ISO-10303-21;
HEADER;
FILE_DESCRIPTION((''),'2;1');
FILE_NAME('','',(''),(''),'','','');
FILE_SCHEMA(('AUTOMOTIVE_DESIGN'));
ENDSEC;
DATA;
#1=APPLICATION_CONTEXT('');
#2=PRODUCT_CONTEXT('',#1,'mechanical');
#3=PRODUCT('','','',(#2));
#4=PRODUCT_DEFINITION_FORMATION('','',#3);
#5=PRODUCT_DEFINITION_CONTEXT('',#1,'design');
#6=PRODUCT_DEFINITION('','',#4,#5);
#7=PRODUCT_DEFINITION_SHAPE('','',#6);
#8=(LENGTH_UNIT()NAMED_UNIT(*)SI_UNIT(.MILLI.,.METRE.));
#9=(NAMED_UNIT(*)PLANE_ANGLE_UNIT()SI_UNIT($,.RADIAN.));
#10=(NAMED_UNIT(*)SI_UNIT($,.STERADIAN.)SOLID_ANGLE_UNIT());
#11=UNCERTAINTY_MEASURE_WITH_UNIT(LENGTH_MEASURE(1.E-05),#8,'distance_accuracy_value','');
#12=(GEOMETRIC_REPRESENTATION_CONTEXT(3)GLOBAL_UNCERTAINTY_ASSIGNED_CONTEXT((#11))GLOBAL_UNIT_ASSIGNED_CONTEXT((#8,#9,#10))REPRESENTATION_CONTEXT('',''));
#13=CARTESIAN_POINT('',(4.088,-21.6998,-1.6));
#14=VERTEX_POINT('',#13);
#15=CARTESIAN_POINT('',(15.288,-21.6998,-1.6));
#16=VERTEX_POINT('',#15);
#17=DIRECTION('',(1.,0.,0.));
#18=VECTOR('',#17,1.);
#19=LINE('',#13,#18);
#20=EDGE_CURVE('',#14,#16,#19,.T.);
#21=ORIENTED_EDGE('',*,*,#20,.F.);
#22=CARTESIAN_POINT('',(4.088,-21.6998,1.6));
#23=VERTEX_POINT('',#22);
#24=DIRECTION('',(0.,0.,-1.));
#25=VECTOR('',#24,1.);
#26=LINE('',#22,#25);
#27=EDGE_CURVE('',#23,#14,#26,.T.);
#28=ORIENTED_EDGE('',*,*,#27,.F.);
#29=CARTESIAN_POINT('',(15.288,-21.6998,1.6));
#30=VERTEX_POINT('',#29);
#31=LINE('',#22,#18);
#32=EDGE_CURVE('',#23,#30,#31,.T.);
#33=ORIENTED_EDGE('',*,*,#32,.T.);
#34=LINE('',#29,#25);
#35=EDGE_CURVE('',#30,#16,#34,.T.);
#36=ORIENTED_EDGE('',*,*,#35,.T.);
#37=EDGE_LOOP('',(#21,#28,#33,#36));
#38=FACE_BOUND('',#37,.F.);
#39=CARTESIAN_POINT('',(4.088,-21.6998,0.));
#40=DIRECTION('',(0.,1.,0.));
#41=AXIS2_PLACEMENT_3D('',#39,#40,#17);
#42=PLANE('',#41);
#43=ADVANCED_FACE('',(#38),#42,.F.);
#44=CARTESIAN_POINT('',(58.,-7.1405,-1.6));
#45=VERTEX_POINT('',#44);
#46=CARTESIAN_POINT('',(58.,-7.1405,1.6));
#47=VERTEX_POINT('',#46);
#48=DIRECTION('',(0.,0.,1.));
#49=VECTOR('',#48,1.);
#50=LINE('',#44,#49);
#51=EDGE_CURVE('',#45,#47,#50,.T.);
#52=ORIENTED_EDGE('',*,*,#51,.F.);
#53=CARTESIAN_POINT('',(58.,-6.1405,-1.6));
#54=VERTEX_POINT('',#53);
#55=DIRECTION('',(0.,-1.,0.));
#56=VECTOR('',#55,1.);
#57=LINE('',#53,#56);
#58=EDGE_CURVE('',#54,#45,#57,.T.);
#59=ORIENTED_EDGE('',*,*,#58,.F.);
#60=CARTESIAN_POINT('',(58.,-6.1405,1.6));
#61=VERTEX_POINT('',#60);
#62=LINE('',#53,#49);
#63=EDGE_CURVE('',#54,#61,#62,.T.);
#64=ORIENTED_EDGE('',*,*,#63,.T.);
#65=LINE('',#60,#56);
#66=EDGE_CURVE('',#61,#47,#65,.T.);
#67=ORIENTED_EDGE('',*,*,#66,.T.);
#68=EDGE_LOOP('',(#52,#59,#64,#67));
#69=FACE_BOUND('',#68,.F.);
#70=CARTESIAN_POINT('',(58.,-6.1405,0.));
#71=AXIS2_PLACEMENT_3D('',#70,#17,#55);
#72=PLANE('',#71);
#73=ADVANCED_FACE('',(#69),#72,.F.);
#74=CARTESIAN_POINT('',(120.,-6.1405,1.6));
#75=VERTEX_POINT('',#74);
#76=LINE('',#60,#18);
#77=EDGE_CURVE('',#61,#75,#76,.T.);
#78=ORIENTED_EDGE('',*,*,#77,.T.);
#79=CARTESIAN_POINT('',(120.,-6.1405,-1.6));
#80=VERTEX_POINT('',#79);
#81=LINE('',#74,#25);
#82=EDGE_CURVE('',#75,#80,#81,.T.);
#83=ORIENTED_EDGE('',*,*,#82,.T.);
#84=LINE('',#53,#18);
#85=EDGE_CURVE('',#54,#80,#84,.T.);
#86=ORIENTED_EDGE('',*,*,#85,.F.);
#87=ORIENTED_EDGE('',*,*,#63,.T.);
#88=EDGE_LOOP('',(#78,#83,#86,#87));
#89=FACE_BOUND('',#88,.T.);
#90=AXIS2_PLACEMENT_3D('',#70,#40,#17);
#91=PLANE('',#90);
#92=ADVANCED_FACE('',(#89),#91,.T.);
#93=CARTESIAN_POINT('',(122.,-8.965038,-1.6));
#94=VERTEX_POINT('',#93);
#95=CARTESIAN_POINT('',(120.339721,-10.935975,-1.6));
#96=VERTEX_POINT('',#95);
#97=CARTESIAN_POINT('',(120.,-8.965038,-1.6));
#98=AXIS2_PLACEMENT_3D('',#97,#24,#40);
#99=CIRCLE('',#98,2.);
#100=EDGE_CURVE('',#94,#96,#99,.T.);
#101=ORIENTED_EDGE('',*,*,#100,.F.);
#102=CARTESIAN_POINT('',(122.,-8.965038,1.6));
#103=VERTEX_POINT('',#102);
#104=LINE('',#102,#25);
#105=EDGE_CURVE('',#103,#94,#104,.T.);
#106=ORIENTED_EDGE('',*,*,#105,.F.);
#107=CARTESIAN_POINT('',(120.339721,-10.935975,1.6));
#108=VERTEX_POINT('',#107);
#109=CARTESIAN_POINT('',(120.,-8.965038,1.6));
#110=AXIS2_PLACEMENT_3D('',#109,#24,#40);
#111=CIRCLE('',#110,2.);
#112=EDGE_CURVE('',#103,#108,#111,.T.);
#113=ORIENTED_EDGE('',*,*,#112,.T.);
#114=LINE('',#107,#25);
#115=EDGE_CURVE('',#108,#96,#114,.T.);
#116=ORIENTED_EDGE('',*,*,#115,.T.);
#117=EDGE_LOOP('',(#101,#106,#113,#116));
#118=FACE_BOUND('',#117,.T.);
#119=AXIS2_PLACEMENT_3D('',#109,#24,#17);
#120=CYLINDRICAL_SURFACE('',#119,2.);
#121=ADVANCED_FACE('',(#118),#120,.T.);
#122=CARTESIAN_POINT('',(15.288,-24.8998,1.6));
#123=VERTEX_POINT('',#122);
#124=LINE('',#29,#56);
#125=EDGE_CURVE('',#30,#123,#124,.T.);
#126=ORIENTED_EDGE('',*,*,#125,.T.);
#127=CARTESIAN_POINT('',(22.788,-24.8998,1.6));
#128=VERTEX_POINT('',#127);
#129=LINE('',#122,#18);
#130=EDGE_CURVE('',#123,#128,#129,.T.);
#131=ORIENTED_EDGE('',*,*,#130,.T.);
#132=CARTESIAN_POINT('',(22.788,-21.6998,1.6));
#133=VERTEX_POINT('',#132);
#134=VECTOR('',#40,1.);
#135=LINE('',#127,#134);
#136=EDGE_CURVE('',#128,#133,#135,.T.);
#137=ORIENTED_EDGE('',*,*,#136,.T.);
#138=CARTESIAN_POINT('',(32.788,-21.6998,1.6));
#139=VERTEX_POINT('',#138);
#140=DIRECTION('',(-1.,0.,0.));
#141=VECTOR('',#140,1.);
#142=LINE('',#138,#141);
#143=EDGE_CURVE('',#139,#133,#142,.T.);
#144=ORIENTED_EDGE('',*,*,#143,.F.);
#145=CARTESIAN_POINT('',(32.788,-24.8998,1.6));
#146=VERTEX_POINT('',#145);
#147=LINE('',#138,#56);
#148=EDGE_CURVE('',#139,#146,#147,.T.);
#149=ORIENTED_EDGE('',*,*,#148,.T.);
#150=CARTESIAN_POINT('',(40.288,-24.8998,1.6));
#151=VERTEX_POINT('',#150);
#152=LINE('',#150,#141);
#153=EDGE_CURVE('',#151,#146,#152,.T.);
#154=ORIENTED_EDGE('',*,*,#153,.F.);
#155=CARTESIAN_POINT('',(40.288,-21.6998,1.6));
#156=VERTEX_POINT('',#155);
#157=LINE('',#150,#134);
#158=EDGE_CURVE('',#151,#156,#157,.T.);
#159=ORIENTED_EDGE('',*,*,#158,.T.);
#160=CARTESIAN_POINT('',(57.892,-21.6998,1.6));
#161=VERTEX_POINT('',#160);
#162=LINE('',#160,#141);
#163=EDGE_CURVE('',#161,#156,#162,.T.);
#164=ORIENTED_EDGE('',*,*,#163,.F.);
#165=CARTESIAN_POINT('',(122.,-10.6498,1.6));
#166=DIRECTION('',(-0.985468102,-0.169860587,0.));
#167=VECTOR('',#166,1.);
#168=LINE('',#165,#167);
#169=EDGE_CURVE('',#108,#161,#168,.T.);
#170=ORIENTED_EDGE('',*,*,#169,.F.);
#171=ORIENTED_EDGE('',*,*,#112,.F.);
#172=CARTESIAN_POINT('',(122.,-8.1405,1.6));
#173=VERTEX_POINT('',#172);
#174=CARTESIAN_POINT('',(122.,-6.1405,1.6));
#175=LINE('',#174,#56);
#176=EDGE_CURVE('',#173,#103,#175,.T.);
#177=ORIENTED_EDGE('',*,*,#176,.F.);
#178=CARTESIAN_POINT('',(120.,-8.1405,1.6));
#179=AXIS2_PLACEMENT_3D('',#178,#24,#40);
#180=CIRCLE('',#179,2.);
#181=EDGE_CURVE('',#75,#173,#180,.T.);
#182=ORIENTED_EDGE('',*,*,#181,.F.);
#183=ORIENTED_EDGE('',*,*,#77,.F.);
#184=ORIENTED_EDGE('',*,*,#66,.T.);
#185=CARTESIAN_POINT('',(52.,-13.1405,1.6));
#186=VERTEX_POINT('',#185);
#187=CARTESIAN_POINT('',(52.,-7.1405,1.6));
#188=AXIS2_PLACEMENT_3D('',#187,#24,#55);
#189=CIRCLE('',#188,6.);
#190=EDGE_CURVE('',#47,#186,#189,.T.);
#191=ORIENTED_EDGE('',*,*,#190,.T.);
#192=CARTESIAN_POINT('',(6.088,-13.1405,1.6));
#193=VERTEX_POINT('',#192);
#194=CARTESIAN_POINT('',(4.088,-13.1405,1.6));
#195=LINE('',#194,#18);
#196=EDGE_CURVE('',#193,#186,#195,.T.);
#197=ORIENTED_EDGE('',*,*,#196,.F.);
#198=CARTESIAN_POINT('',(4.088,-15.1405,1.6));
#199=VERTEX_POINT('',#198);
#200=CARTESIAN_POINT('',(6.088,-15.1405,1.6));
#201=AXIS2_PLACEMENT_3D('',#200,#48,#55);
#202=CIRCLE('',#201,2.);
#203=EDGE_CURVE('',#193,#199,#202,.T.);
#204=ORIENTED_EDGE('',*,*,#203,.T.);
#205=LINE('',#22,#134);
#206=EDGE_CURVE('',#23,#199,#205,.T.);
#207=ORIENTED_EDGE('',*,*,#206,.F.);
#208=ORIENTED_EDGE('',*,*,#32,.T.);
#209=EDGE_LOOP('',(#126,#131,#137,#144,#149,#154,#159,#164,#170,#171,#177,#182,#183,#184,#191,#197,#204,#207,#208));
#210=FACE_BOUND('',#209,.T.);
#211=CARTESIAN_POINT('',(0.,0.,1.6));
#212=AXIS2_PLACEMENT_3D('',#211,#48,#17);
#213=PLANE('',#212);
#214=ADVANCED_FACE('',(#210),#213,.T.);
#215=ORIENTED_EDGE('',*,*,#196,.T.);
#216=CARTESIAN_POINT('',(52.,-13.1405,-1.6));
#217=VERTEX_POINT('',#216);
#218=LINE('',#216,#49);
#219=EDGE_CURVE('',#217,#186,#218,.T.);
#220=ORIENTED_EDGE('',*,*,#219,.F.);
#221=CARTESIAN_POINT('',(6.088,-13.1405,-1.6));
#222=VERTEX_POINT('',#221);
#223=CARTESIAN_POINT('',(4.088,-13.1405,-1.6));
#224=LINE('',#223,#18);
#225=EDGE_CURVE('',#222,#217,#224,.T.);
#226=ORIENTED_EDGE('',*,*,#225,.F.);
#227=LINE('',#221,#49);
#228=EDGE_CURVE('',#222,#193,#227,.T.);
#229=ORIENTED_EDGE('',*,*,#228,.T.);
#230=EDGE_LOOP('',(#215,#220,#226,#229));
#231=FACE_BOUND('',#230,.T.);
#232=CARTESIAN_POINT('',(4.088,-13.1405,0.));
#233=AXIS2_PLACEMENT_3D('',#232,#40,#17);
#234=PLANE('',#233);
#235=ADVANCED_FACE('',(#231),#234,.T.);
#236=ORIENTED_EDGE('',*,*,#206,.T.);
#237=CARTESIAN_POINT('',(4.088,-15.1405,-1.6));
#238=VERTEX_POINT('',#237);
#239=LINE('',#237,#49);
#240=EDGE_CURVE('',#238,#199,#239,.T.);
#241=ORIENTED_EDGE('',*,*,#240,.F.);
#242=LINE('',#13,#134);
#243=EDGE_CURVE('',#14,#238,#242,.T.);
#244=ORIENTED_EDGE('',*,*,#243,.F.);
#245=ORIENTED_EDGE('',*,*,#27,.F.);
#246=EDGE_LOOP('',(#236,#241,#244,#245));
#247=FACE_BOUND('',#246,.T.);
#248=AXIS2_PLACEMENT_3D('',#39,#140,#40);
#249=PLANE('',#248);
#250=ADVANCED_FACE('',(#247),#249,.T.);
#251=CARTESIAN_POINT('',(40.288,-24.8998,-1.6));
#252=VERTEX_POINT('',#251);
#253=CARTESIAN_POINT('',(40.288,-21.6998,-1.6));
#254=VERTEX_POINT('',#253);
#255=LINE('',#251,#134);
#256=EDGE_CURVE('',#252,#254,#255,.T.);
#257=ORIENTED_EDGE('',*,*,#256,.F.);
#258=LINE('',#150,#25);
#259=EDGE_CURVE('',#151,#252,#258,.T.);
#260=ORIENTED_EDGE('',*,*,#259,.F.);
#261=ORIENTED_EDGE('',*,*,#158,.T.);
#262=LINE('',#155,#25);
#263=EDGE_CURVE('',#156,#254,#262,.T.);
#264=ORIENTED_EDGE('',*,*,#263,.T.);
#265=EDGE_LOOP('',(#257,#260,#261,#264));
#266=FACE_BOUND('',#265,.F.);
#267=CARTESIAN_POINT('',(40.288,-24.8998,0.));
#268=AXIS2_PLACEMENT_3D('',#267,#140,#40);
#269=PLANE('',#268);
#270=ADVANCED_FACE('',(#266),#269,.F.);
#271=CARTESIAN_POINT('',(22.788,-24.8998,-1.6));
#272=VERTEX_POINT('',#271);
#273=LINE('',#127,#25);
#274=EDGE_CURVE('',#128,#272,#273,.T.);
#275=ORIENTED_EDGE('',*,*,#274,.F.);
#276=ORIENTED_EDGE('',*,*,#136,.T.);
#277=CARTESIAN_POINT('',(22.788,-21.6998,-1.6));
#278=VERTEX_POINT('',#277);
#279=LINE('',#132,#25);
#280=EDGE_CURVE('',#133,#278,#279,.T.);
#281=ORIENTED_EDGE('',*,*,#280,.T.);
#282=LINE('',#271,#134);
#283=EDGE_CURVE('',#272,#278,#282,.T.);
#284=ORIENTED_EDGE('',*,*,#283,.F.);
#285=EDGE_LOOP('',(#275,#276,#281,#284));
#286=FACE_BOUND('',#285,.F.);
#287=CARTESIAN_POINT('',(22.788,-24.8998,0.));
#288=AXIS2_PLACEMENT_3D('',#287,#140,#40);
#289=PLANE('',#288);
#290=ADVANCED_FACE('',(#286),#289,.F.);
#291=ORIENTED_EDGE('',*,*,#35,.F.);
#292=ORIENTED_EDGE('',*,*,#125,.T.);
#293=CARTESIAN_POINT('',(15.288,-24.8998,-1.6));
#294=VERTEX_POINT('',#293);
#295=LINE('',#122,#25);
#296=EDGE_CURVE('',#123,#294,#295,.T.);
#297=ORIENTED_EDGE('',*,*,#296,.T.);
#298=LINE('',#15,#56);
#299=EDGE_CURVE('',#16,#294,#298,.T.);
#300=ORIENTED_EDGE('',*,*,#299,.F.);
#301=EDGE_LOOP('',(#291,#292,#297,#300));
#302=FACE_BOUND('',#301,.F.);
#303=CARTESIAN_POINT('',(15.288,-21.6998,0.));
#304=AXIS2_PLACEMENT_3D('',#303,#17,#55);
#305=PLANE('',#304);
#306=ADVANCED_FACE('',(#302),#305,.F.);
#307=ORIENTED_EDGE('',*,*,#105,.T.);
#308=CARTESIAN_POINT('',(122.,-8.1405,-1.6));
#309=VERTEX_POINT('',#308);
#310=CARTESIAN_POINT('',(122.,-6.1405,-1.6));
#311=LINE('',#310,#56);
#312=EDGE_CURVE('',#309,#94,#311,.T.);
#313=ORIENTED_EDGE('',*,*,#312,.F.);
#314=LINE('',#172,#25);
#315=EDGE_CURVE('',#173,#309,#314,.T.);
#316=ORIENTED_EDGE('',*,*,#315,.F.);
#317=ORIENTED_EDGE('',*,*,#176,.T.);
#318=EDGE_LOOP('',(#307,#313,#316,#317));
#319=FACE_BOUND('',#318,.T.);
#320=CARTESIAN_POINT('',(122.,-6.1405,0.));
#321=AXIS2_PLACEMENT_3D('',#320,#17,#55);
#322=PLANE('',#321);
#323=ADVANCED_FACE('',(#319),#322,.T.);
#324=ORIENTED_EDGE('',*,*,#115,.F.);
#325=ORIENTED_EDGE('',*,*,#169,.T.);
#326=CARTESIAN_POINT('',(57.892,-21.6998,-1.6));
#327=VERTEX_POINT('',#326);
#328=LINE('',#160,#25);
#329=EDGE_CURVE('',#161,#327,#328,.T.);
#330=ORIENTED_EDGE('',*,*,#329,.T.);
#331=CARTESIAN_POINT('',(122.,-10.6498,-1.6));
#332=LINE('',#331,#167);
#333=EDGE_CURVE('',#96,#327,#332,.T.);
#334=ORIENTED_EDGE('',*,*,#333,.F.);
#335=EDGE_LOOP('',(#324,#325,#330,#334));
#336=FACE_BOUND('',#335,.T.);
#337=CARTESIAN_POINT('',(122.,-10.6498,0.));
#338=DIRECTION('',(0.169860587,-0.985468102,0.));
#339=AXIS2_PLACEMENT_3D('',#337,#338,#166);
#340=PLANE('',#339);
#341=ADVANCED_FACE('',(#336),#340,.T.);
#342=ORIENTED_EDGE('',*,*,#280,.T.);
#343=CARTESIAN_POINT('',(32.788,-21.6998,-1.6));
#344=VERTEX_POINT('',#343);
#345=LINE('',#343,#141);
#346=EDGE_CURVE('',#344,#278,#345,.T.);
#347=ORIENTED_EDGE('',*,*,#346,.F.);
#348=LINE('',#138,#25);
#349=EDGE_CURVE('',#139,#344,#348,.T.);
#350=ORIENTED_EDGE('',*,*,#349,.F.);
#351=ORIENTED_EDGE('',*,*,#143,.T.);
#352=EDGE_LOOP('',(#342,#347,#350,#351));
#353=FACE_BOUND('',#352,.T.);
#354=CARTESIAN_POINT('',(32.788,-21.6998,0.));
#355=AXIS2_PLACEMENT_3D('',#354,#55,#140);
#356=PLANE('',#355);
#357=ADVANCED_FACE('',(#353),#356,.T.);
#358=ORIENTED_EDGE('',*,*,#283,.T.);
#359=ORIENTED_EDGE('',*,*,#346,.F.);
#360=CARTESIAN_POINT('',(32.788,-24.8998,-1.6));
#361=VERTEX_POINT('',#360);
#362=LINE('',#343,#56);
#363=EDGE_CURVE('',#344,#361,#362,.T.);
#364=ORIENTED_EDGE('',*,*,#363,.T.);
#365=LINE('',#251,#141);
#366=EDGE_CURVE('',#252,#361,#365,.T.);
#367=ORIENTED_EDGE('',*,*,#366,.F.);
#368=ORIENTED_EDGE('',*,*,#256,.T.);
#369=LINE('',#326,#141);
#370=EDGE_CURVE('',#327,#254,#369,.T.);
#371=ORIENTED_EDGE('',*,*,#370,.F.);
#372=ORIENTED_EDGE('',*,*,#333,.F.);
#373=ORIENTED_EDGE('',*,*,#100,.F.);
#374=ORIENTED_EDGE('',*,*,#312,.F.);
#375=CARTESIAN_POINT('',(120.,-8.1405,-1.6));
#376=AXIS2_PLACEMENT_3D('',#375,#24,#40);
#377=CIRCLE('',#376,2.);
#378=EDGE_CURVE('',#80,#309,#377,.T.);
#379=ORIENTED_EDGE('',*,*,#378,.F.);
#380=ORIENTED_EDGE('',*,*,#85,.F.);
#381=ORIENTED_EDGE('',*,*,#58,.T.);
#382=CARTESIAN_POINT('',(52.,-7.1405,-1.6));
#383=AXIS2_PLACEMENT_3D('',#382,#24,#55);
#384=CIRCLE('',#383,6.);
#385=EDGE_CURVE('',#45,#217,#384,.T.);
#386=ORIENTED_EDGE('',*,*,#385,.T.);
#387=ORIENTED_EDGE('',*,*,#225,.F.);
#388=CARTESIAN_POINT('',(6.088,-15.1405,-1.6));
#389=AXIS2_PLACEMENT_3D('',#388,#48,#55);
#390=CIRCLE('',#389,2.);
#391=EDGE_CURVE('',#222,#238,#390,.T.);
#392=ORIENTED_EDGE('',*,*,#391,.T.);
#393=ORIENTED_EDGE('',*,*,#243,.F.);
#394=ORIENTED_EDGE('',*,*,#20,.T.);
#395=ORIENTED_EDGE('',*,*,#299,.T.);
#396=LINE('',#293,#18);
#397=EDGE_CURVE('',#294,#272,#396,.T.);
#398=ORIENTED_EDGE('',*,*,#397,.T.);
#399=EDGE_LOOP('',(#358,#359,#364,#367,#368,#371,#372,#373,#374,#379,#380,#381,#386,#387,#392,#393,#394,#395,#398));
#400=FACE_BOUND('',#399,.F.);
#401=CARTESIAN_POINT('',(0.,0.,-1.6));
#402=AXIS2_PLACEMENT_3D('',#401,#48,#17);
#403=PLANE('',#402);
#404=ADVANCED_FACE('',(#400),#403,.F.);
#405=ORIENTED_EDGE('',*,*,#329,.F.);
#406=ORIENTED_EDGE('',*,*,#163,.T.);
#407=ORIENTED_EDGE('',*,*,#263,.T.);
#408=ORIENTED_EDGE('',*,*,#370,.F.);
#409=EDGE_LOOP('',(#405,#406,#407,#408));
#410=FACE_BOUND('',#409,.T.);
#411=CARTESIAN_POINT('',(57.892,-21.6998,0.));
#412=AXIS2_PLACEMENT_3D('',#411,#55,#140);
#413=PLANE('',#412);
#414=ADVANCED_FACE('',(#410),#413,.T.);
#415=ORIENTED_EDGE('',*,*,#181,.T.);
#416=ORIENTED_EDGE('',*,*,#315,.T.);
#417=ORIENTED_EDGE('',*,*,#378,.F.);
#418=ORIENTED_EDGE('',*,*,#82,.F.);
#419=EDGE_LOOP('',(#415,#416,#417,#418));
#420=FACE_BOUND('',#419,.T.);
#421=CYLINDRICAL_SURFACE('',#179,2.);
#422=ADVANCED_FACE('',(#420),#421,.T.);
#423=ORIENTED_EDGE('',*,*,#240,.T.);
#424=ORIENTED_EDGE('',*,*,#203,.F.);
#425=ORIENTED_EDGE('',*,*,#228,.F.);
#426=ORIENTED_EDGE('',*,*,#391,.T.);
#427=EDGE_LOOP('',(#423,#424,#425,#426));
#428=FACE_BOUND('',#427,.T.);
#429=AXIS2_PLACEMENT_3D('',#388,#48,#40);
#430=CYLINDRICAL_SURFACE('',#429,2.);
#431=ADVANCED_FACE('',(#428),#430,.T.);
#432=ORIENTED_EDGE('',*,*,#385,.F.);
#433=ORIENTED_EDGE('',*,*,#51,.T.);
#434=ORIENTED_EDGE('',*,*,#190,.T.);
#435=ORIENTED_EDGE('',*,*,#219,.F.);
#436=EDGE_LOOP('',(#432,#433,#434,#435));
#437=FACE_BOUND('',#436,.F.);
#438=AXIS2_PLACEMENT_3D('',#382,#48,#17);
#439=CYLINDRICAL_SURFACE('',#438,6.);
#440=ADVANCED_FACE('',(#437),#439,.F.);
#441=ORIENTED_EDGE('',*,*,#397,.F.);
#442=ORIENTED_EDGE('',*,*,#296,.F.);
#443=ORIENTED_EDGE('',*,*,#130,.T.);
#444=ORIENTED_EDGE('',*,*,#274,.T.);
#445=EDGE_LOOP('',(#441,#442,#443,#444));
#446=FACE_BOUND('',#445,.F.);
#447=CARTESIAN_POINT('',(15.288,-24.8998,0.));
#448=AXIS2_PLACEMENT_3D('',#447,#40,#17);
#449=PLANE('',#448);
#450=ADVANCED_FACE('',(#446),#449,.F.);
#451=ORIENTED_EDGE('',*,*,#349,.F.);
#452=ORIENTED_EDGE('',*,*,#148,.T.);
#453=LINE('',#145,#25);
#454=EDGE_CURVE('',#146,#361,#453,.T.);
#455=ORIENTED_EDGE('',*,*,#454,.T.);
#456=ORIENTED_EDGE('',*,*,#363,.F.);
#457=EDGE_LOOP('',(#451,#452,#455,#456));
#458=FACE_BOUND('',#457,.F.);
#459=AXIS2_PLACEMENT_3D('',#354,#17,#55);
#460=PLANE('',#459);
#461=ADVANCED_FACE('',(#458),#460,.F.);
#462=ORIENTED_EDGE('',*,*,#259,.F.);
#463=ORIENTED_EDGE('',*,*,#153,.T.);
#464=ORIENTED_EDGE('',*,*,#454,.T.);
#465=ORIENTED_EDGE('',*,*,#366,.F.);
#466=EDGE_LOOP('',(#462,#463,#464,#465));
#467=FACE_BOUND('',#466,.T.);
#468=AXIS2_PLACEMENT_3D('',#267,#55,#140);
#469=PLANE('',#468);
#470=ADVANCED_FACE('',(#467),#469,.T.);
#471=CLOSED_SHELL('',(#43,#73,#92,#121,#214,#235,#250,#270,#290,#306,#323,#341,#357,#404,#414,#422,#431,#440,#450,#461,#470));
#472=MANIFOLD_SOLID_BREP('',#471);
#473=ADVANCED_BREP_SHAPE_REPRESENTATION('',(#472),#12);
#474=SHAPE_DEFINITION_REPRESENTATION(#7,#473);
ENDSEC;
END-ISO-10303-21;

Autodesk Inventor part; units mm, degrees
ref_plane "YZ Plane" through (0, 0, 0) normal (1, 0, 0) x (0, 1, 0)
ref_plane "XZ Plane" through (0, 0, 0) normal (0, 1, 0) x (-1, 0, 0)
ref_plane "XY Plane" through (0, 0, 0) normal (0, 0, 1) x (1, 0, 0)
sketch "Sketch1" plane through (0, 0, 0) normal (0, 0, 1) x (1, 0, 0)
  line L0 (58, -6.1405) -> (122, -6.1405)
  line L1 (122, -6.1405) -> (122, -10.6498)
  line L2 (122, -10.6498) -> (57.892, -21.6998)
  line L3 (4.088, -21.6998) -> (15.288, -21.6998)
  line L4 (15.288, -21.6998) -> (15.288, -24.8998)
  line L5 (15.288, -24.8998) -> (22.788, -24.8998)
  line L6 (22.788, -24.8998) -> (22.788, -21.6998)
  line L7 (32.788, -21.6998) -> (32.788, -24.8998)
  line L8 (40.288, -24.8998) -> (40.288, -21.6998)
  line L9 (58, -6.1405) -> (122, -6.1405)
  line L10 (122, -6.1405) -> (122, -10.6498)
  line L11 (57.892, -21.6998) -> (122, -10.6498)
  line L12 (57.892, -21.6998) -> (40.288, -21.6998)
  line L13 (40.288, -24.8998) -> (40.288, -21.6998)
  line L14 (40.288, -24.8998) -> (32.788, -24.8998)
  line L15 (32.788, -24.8998) -> (32.788, -21.6998)
  line L16 (32.788, -21.6998) -> (22.788, -21.6998)
  line L17 (22.788, -24.8998) -> (22.788, -21.6998)
  line L18 (15.288, -24.8998) -> (22.788, -24.8998)
  line L19 (15.288, -24.8998) -> (15.288, -21.6998)
  line L20 (15.288, -21.6998) -> (4.088, -21.6998)
  line L21 (58, -6.1405) -> (58, -13.1405)
  line L22 (4.088, -21.6998) -> (4.088, -13.1405)
  line L23 (4.088, -13.1405) -> (58, -13.1405)
  point P0 (0, 0)
  point P1 (0, 0)
  dimension "d1" = 11.2
  dimension "d2" = 7.5
  dimension "d3" = 10
  dimension "d4" = 7.5
  dimension "d15" = 21.6998
  dimension "d20" = 7
  dimension "d21" = 58
  dimension "d22" = 122
  dimension "d25" = 17.604
  dimension "d27" = 4.088
extrude "Plate1" add sketch "Sketch1" along normal mid plane 3.2
fillet "Corner Round3" radius 6 1 edges at (58, -13.1405, 0)
fillet "Corner Round4" radius 2 3 edges at (122, -6.1405, 0) (122, -10.6498, 0) (4.088, -13.1405, 0)
equation "\"d4\" = d2"
equation "\"d0\" = Thickness"
equation "\"BendRadius\" = Thickness"
equation "\"BendReliefWidth\" = Thickness"
equation "\"BendReliefDepth\" = 0.5 * Thickness"
equation "\"CornerReliefSize\" = 4 * Thickness"
equation "\"MinimumRemnant\" = 2 * Thickness"
equation "\"TransitionRadius\" = BendRadius"
equation "\"JacobiRadiusSize\" = BendRadius"
equation "\"GapSize\" = Thickness"
equation "\"Thickness\" = 3.2"
properties part number "SP9V1 Columna Freno" material "Stainless Steel"
